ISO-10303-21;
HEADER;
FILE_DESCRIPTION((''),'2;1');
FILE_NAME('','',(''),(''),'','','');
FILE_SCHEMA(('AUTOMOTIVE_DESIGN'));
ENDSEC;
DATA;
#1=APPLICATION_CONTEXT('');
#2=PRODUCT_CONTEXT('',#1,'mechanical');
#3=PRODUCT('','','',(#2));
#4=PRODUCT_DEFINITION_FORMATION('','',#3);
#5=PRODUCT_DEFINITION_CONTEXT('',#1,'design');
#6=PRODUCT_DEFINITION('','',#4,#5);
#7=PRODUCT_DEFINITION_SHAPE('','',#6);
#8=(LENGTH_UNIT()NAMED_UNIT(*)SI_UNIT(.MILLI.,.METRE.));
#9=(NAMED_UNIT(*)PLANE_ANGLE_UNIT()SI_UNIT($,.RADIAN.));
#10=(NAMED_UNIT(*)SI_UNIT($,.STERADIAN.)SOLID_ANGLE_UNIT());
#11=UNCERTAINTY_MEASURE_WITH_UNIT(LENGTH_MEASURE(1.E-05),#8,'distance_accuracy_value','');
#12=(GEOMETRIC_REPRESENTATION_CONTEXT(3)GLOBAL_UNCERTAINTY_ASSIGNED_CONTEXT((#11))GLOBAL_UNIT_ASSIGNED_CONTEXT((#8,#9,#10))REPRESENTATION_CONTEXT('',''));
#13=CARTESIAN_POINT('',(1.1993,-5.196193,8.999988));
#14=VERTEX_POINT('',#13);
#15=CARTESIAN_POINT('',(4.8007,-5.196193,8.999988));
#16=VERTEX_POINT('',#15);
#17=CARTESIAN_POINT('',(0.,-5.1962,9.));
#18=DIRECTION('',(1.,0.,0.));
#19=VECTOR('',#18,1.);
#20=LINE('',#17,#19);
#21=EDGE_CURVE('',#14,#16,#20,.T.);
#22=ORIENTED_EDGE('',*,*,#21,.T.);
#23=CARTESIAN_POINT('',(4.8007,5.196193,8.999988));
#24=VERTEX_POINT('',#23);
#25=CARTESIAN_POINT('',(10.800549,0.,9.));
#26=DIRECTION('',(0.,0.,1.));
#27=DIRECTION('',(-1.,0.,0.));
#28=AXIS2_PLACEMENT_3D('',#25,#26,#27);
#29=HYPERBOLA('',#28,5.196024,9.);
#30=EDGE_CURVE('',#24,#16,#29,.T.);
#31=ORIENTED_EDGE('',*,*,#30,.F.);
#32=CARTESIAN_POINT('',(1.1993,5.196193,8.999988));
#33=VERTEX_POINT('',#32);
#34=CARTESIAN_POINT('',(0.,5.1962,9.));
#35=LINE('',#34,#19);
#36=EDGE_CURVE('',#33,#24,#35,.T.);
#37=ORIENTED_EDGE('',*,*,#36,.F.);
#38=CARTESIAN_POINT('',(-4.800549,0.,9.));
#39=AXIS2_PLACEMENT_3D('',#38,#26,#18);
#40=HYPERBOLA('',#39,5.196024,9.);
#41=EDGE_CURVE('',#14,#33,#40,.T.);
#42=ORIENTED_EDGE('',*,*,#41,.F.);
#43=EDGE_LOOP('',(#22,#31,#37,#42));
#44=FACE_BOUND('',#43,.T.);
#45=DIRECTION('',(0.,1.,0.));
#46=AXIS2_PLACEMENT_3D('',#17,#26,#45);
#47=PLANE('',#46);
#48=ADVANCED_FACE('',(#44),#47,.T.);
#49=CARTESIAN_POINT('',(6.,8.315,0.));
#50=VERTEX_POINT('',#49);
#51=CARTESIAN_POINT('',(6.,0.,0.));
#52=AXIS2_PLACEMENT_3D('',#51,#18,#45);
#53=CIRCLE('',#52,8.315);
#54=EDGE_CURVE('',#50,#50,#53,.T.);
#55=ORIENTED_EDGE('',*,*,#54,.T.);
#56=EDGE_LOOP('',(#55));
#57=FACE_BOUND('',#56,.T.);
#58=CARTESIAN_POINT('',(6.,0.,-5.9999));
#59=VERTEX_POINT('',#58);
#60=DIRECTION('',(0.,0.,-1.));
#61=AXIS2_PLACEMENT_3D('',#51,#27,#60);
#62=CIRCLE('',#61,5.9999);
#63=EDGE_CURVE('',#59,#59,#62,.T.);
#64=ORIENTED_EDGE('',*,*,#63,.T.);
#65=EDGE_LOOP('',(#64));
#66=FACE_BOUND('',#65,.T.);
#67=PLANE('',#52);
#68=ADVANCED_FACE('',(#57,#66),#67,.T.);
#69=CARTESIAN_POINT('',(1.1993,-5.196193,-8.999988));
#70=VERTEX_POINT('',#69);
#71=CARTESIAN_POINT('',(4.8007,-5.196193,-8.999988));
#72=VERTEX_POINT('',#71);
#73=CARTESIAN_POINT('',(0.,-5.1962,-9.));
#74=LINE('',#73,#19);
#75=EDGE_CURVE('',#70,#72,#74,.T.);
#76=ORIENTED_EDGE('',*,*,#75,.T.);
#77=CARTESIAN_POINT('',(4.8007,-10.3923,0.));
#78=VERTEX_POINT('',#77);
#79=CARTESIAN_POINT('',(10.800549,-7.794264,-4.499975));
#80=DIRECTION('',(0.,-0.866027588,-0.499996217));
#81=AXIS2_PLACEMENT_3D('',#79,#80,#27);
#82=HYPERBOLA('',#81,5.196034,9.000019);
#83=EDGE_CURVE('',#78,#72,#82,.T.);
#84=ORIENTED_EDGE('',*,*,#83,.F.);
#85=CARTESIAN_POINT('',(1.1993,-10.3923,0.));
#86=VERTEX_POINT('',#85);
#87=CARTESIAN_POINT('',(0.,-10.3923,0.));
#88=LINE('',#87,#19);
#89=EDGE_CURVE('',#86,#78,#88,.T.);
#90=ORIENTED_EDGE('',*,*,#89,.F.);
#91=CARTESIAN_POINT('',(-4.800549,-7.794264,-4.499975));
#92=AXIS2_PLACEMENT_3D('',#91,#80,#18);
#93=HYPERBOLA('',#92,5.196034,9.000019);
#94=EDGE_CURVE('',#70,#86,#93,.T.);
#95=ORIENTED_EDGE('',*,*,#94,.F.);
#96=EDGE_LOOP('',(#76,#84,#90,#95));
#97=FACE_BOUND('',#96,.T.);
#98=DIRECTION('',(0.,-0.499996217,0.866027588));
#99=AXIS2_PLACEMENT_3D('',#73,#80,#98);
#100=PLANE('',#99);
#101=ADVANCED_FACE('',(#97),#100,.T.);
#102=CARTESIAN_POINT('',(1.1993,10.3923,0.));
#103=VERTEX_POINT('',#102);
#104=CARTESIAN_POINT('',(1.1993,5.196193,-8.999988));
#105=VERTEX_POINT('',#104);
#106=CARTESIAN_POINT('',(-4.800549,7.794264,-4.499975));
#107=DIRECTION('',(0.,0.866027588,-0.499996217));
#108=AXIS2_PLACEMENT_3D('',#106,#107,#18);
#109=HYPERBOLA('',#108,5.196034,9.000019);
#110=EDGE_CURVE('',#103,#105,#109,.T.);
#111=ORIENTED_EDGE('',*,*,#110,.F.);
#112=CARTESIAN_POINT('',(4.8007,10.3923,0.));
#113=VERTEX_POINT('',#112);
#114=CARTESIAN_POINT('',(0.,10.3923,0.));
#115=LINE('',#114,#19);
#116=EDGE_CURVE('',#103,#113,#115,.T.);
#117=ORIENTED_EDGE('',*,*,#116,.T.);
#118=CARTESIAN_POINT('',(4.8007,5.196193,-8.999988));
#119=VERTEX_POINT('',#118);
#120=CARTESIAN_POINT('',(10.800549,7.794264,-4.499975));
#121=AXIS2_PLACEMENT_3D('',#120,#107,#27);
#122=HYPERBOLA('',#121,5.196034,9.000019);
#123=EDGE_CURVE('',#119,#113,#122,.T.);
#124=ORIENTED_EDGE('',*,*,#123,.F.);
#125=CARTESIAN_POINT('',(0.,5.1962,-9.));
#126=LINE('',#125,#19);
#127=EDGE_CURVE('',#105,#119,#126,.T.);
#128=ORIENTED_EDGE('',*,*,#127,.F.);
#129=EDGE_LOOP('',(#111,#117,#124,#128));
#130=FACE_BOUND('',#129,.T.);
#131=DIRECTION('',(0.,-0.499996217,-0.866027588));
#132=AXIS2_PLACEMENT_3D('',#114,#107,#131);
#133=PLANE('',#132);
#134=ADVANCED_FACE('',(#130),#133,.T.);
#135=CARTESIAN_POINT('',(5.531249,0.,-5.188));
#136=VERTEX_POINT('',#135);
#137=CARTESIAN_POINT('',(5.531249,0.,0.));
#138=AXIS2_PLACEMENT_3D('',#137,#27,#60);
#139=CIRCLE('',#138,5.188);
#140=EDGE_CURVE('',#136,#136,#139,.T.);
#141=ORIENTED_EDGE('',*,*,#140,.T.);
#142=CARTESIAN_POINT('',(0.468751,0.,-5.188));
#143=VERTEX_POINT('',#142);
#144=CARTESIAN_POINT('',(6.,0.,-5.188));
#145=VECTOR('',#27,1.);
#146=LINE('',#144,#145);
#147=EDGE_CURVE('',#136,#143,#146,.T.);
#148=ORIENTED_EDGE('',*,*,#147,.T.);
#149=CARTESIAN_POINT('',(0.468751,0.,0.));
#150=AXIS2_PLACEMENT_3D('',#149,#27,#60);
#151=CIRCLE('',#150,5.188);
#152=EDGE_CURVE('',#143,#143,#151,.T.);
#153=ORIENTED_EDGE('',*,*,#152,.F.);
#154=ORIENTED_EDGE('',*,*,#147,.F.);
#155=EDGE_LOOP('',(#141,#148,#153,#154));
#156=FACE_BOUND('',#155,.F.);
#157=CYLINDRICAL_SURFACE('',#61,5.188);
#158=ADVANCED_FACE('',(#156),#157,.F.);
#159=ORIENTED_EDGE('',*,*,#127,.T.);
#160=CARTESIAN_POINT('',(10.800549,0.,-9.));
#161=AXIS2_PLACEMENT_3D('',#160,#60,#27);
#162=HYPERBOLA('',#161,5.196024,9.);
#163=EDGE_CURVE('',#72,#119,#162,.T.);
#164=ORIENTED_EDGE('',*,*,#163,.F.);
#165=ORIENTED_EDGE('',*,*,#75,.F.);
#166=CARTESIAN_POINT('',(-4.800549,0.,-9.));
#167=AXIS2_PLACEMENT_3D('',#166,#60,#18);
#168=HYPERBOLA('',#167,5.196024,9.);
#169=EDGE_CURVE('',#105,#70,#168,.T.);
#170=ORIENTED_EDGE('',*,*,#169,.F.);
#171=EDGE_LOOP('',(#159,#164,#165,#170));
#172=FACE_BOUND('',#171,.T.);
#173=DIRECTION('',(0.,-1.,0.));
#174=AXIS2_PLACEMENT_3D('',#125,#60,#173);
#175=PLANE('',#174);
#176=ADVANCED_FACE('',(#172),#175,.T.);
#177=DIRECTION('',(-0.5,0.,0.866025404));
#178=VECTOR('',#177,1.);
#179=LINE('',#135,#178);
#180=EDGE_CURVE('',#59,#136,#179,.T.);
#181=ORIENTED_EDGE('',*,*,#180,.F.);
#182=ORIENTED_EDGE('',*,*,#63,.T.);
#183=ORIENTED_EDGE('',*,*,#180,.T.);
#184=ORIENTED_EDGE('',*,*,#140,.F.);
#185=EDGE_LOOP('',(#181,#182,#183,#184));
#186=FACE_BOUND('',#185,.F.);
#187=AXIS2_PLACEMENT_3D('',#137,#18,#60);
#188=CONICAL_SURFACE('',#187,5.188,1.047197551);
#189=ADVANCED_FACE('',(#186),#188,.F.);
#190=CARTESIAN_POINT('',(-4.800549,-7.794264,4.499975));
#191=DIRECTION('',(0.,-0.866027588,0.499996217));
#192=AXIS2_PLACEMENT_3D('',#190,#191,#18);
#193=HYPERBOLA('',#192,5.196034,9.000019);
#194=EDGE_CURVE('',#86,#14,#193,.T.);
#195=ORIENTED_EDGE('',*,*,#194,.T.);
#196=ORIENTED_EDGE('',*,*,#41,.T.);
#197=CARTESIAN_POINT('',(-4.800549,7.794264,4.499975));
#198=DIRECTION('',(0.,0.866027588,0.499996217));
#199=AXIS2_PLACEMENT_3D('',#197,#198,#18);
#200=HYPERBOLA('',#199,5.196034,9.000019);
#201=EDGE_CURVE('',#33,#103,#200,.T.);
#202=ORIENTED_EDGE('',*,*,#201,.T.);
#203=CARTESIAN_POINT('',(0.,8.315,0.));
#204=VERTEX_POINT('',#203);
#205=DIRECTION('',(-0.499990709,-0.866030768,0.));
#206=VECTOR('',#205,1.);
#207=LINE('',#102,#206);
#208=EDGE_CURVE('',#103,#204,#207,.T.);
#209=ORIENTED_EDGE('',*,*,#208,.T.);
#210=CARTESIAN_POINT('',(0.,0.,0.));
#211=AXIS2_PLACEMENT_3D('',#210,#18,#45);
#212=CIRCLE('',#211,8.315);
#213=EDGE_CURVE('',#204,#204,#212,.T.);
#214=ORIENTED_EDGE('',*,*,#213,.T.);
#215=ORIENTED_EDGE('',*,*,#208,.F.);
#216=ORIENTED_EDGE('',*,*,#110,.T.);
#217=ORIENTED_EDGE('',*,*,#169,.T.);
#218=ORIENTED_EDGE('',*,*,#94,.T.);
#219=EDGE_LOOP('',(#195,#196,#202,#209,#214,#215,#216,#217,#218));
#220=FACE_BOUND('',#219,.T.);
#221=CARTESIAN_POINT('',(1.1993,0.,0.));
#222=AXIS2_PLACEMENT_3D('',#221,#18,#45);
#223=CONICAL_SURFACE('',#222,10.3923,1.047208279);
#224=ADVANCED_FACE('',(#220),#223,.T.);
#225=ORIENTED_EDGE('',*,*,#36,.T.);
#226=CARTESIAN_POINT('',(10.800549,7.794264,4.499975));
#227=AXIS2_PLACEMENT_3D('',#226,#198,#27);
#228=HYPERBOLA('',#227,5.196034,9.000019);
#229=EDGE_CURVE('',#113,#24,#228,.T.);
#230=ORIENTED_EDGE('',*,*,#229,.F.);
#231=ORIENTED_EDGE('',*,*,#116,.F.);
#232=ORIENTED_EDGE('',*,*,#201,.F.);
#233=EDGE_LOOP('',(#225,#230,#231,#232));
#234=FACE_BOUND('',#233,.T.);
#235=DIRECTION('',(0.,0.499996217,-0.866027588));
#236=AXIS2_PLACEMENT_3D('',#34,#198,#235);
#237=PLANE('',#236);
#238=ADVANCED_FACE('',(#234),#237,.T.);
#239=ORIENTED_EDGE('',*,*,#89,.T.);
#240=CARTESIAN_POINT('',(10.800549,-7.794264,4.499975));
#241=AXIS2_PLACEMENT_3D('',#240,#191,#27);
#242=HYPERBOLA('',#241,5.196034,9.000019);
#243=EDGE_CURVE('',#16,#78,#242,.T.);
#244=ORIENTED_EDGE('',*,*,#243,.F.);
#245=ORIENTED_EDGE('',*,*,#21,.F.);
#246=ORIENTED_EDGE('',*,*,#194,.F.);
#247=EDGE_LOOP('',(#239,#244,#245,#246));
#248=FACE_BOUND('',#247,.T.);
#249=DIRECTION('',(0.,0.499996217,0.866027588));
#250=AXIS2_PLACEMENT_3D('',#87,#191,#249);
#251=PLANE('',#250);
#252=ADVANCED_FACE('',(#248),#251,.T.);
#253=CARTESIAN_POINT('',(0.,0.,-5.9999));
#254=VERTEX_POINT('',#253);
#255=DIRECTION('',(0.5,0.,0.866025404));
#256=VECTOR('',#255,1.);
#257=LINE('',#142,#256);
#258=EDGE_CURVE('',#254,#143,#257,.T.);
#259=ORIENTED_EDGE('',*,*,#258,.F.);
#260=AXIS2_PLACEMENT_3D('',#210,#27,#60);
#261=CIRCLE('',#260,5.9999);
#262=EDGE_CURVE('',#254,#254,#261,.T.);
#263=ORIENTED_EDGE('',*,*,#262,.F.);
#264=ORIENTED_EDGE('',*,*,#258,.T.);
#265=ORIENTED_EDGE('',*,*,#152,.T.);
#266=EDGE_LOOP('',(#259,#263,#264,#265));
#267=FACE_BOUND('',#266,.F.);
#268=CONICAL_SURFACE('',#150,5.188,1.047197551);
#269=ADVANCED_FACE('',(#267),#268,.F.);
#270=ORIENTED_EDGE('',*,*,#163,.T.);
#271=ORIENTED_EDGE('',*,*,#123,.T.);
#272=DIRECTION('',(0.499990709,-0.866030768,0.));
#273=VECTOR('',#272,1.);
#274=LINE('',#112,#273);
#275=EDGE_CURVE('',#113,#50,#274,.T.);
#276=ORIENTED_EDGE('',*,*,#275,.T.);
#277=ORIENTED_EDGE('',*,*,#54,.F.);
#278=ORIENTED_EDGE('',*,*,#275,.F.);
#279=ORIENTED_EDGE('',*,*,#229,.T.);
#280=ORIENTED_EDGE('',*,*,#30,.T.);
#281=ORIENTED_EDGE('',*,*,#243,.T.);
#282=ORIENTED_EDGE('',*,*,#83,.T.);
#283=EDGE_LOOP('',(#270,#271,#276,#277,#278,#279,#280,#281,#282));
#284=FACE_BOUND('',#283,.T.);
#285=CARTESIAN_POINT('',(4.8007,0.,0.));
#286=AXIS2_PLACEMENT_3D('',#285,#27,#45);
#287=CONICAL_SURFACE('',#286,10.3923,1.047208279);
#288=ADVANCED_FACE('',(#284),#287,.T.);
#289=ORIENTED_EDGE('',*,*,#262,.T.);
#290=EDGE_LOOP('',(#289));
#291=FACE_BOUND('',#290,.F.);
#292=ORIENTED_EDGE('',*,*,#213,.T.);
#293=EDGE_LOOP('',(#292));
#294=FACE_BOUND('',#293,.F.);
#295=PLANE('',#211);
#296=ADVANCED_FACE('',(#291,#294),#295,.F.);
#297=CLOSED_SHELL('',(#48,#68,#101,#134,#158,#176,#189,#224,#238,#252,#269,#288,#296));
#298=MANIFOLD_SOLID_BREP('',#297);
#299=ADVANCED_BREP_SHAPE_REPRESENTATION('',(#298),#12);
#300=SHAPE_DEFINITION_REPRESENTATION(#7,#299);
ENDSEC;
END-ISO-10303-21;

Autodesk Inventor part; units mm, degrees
ref_plane "YZ Plane" through (0, 0, 0) normal (1, 0, 0) x (0, 1, 0)
ref_plane "XZ Plane" through (0, 0, 0) normal (0, 1, 0) x (-1, 0, 0)
sketch "Skizze1" plane through (0, 0, 0) normal (1, 0, 0) x (0, 1, 0)
  line L0 (-10.3923, 0) -> (-5.1962, 9)
  line L1 (-5.1962, 9) -> (5.1962, 9)
  line L2 (5.1962, 9) -> (10.3923, 0)
  line L3 (10.3923, 0) -> (5.1962, -9)
  line L4 (5.1962, -9) -> (-5.1962, -9)
  line L5 (-5.1962, -9) -> (-10.3923, 0)
  point P0 (0, 0)
  point P1 (0, 0)
  dimension "d0" = 20.7846
extrude "Körper" add sketch "Skizze1" along normal blind 6
sketch "Skizze2" plane through (0, 0, 0) normal (0, 0, 1) x (1, 0, 0)
  line L0 (0, 5.1962) -> (0, 10.3923) projected
  line L1 (0, 10.3923) -> (6, 10.3923) projected
  line L2 (6, 5.1962) -> (6, 10.3923) projected
  line L3 (-1.2, 0) -> (7.2, 0) projected
  line L4 (1.1993, 10.3923) -> (0, 8.315)
  line L5 (4.8007, 10.3923) -> (6, 8.315)
  dimension "d3" = 30
  dimension "d4" = 30
  dimension "d5" = 16.63
  dimension "d6" = 16.63
revolve "Fase1" cut sketch "Skizze2" angle 360 about axis through (-10, 0, 0) along (1, 0, 0)
sketch "Skizze3" plane through (6, 0, 0) normal (1, 0, 0) x (0, 0, -1)
  arc A0 (-0.625, -1.0825) -> (0.625, -1.0825) centre (0, 0) ccw projected
hole "Gewinde" at (6, 0, 0) direction (-1, 0, 0) diameter 10.376 end through all thread size "M12x1.5" class "6H" standard "ISO Metric profile"
chamfer "Fase2" distance 0.8119 angle 30 1 edges at (6, 0, 5.188) measured on face at (6, 7.1795, -0.8718)
chamfer "Fase3" distance 0.8119 angle 30 1 edges at (0, 0, 5.188) measured on face at (0, 7.1795, -0.8718)
ref_plane "Work Plane1" through (-22.2768, 0, 0) normal (0, -0.8660254, -0.5) x (1, 0, 0)
equation "\"d0\" = 1.1547 * SW"
equation "\"d1\" = KOH"
equation "\"d3\" = ANG1"
equation "\"d4\" = ANG2"
equation "\"d5\" = SW0"
equation "\"d6\" = SW01"
equation "\"d8\" = -0.5 * GD1 + 0.5 * NND"
equation "\"d40\" = -0.5 * GD1 + 0.5 * NND"
equation "\"d10\" = -0.5 * GD1 + 0.5 * NND"
equation "\"d41\" = -0.5 * GD1 + 0.5 * NND"
equation "\"ANG1\" = 30deg"
equation "\"ANG2\" = 30deg"
equation "\"NND\" = 12"
equation "\"KOH\" = 6"
equation "\"SW\" = 18"
equation "\"SW0\" = 16.63"
equation "\"SW01\" = SW0"
equation "\"GUL\" = 0.541266 * PTC"
equation "\"THREADDIA\" = 12"
equation "\"TOA\" = 30deg"
equation "\"PTC\" = 1.5"
equation "\"E0\" = 20.03"
equation "\"GAL\" = 0.541266 * PTC"
equation "\"GD1\" = 10.376202"
properties part number "ISO 8675 - M12 x 1,5" material "Edelstahl, 440C"
